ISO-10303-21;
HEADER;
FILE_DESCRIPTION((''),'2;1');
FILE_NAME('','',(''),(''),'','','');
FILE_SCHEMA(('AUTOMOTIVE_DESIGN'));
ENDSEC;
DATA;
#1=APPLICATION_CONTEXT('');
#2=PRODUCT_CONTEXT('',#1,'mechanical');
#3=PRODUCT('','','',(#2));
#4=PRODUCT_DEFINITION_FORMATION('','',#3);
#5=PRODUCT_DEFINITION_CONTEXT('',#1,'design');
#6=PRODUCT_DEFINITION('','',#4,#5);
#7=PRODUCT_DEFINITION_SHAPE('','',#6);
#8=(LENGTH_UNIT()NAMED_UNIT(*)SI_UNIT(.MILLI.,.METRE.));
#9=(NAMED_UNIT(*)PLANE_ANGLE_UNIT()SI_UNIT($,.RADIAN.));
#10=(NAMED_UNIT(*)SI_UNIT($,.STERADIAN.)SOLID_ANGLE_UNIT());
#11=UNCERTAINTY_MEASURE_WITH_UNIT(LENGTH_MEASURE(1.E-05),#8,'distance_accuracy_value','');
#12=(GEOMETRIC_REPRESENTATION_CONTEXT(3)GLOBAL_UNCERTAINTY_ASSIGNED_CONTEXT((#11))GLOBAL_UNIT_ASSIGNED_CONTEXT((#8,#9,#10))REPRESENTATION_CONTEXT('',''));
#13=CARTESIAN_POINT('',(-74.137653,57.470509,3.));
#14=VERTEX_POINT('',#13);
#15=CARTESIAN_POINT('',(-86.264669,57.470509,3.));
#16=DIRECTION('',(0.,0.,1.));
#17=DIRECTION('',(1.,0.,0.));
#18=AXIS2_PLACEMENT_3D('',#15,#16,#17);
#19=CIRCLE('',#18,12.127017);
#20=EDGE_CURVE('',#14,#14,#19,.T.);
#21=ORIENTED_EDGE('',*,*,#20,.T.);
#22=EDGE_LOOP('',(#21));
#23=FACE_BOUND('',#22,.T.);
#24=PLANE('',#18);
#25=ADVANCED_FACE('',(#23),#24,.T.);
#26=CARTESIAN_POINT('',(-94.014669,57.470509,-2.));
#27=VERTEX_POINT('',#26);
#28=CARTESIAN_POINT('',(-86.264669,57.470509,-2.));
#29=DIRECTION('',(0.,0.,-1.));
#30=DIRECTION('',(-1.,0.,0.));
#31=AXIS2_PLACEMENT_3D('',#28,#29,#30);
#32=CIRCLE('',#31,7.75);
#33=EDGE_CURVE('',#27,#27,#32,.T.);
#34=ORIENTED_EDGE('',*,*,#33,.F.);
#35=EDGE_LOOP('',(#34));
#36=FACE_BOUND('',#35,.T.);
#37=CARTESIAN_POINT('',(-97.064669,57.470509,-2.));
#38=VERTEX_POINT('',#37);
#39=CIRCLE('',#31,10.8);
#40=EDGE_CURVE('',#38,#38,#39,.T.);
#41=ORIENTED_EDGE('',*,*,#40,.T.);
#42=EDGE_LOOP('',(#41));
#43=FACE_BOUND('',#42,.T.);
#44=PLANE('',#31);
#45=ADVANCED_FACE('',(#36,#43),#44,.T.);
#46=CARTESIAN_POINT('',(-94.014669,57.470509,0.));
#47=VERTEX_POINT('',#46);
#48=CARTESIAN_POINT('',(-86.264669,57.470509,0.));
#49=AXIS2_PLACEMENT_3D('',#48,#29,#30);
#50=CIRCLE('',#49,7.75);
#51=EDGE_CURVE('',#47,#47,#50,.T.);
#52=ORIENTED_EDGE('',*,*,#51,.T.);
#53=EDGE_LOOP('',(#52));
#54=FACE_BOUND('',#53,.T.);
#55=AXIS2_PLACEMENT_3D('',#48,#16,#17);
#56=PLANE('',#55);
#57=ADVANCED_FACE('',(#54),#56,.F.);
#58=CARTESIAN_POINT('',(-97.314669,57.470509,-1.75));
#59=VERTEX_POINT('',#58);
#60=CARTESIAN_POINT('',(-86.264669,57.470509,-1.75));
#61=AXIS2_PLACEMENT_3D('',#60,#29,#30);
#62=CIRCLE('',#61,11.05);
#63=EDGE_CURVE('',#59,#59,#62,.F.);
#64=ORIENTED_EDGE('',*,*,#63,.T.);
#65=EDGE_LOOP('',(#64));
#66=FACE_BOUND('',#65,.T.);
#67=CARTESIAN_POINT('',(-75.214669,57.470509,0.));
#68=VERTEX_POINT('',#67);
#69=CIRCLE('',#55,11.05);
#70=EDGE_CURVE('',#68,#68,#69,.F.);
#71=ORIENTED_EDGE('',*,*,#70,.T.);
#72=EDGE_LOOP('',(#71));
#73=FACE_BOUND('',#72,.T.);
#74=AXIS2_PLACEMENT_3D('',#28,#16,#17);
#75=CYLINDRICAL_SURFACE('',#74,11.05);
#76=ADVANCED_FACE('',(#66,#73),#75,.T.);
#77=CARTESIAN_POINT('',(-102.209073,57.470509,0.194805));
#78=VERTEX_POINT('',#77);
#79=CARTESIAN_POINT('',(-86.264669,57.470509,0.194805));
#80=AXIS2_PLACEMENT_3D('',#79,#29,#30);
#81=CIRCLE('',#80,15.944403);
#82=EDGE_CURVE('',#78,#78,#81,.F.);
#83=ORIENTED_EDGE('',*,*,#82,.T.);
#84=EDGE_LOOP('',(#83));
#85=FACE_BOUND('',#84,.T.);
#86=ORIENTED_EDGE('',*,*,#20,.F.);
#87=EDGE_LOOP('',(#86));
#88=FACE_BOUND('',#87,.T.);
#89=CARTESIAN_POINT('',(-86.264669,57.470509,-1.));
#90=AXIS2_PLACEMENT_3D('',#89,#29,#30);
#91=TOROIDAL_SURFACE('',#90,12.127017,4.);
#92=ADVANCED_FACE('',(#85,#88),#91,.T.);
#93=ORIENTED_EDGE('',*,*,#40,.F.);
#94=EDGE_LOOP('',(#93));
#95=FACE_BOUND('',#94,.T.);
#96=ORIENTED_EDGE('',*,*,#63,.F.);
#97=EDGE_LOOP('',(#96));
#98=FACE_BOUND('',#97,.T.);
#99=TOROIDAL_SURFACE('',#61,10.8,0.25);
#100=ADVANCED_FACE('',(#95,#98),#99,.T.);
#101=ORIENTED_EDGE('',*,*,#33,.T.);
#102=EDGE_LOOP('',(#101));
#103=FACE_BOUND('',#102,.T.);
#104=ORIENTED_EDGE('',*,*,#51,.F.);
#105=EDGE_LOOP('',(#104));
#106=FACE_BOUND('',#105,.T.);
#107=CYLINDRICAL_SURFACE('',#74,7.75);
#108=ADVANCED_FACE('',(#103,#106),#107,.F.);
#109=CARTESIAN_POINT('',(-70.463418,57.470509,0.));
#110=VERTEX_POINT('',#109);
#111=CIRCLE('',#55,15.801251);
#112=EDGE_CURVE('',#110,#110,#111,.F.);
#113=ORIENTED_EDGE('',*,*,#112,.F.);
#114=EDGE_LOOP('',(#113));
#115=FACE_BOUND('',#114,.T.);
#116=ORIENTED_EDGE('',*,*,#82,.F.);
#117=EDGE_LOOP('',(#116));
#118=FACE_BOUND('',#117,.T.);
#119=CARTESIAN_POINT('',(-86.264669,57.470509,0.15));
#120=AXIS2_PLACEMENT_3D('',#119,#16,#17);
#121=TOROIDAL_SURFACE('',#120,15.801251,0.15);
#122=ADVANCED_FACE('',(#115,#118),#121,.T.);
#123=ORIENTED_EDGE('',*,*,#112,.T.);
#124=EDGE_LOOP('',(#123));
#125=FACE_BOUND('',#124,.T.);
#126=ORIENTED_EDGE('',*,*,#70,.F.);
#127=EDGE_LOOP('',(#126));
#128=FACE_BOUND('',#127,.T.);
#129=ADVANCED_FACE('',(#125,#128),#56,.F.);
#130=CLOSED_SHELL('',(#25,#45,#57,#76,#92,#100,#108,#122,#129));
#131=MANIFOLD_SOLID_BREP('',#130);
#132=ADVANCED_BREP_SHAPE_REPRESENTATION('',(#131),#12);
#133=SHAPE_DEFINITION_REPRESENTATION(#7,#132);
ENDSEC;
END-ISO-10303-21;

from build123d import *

# Parameters (mm, degrees)
SKETCH1_R           = 16
BOSS_EXTRUDE1_DEPTH = 3
FILLET1_R           = 4
FILLET2_R           = 0.15
SKETCH2_R           = 11.05
SKETCH2_R_2         = 7.75
BOSS_EXTRUDE2_DEPTH = 2
FILLET3_R           = 0.25


with BuildPart() as part:
    # Sketch1 → Boss-Extrude1 (new body)
    with BuildSketch(Plane.XY):
        with Locations((-86.26466932, 57.470508952)):
            Circle(SKETCH1_R)
    extrude(amount=BOSS_EXTRUDE1_DEPTH)

    # Fillet1
    # the kernel refuses this fillet: 4 mm, written as the material it takes off along each edge
    with BuildSketch(Plane(origin=(-86.26466932, 57.470508952, 3), x_dir=(1, 0, 0), z_dir=(0, -1, 0))) as fillet1_piece_1:
        with BuildLine():
            CenterArc((12.127016654, -4), FILLET1_R, 14.477512186, 75.522487814)
            Line((12.127016654, 0), (12.127016654, 0.08))
            Line((12.127016654, 0.08), (16, 0.08))
            Line((16, 0.08), (16.08, 0))
            ThreePointArc((16.08, 0), (16.08, -1.5), (16.077459667, -2.98))
            Line((16.077459667, -2.98), (16, -3))
        make_face()
    revolve(axis=Axis((-86.26466932, 57.470508952, 3), (0, 0, 1)), mode=Mode.SUBTRACT)

    # Fillet2
    fillet2_edges = [part.edges().sort_by_distance(p)[0] for p in [
        (-102.26466932, 57.470508952, 0),
    ]]
    fillet(fillet2_edges, radius=FILLET2_R)

    # Sketch2 → Boss-Extrude2 (add)
    with BuildSketch(Plane(origin=(0, 0, 0), x_dir=(-1, 0, 0), z_dir=(0, 0, -1))):
        with Locations(Location((86.26466932, 57.470508952, 0), (0, 0, 180))):
            Circle(SKETCH2_R)
        with Locations((86.26466932, 57.470508952)):
            Circle(SKETCH2_R_2, mode=Mode.SUBTRACT)
    extrude(amount=BOSS_EXTRUDE2_DEPTH)

    # Fillet3
    fillet3_edges = [part.edges().sort_by_distance(p)[0] for p in [
        (-97.31466932, 57.470508952, -2),
    ]]
    fillet(fillet3_edges, radius=FILLET3_R)


solid = part.part
